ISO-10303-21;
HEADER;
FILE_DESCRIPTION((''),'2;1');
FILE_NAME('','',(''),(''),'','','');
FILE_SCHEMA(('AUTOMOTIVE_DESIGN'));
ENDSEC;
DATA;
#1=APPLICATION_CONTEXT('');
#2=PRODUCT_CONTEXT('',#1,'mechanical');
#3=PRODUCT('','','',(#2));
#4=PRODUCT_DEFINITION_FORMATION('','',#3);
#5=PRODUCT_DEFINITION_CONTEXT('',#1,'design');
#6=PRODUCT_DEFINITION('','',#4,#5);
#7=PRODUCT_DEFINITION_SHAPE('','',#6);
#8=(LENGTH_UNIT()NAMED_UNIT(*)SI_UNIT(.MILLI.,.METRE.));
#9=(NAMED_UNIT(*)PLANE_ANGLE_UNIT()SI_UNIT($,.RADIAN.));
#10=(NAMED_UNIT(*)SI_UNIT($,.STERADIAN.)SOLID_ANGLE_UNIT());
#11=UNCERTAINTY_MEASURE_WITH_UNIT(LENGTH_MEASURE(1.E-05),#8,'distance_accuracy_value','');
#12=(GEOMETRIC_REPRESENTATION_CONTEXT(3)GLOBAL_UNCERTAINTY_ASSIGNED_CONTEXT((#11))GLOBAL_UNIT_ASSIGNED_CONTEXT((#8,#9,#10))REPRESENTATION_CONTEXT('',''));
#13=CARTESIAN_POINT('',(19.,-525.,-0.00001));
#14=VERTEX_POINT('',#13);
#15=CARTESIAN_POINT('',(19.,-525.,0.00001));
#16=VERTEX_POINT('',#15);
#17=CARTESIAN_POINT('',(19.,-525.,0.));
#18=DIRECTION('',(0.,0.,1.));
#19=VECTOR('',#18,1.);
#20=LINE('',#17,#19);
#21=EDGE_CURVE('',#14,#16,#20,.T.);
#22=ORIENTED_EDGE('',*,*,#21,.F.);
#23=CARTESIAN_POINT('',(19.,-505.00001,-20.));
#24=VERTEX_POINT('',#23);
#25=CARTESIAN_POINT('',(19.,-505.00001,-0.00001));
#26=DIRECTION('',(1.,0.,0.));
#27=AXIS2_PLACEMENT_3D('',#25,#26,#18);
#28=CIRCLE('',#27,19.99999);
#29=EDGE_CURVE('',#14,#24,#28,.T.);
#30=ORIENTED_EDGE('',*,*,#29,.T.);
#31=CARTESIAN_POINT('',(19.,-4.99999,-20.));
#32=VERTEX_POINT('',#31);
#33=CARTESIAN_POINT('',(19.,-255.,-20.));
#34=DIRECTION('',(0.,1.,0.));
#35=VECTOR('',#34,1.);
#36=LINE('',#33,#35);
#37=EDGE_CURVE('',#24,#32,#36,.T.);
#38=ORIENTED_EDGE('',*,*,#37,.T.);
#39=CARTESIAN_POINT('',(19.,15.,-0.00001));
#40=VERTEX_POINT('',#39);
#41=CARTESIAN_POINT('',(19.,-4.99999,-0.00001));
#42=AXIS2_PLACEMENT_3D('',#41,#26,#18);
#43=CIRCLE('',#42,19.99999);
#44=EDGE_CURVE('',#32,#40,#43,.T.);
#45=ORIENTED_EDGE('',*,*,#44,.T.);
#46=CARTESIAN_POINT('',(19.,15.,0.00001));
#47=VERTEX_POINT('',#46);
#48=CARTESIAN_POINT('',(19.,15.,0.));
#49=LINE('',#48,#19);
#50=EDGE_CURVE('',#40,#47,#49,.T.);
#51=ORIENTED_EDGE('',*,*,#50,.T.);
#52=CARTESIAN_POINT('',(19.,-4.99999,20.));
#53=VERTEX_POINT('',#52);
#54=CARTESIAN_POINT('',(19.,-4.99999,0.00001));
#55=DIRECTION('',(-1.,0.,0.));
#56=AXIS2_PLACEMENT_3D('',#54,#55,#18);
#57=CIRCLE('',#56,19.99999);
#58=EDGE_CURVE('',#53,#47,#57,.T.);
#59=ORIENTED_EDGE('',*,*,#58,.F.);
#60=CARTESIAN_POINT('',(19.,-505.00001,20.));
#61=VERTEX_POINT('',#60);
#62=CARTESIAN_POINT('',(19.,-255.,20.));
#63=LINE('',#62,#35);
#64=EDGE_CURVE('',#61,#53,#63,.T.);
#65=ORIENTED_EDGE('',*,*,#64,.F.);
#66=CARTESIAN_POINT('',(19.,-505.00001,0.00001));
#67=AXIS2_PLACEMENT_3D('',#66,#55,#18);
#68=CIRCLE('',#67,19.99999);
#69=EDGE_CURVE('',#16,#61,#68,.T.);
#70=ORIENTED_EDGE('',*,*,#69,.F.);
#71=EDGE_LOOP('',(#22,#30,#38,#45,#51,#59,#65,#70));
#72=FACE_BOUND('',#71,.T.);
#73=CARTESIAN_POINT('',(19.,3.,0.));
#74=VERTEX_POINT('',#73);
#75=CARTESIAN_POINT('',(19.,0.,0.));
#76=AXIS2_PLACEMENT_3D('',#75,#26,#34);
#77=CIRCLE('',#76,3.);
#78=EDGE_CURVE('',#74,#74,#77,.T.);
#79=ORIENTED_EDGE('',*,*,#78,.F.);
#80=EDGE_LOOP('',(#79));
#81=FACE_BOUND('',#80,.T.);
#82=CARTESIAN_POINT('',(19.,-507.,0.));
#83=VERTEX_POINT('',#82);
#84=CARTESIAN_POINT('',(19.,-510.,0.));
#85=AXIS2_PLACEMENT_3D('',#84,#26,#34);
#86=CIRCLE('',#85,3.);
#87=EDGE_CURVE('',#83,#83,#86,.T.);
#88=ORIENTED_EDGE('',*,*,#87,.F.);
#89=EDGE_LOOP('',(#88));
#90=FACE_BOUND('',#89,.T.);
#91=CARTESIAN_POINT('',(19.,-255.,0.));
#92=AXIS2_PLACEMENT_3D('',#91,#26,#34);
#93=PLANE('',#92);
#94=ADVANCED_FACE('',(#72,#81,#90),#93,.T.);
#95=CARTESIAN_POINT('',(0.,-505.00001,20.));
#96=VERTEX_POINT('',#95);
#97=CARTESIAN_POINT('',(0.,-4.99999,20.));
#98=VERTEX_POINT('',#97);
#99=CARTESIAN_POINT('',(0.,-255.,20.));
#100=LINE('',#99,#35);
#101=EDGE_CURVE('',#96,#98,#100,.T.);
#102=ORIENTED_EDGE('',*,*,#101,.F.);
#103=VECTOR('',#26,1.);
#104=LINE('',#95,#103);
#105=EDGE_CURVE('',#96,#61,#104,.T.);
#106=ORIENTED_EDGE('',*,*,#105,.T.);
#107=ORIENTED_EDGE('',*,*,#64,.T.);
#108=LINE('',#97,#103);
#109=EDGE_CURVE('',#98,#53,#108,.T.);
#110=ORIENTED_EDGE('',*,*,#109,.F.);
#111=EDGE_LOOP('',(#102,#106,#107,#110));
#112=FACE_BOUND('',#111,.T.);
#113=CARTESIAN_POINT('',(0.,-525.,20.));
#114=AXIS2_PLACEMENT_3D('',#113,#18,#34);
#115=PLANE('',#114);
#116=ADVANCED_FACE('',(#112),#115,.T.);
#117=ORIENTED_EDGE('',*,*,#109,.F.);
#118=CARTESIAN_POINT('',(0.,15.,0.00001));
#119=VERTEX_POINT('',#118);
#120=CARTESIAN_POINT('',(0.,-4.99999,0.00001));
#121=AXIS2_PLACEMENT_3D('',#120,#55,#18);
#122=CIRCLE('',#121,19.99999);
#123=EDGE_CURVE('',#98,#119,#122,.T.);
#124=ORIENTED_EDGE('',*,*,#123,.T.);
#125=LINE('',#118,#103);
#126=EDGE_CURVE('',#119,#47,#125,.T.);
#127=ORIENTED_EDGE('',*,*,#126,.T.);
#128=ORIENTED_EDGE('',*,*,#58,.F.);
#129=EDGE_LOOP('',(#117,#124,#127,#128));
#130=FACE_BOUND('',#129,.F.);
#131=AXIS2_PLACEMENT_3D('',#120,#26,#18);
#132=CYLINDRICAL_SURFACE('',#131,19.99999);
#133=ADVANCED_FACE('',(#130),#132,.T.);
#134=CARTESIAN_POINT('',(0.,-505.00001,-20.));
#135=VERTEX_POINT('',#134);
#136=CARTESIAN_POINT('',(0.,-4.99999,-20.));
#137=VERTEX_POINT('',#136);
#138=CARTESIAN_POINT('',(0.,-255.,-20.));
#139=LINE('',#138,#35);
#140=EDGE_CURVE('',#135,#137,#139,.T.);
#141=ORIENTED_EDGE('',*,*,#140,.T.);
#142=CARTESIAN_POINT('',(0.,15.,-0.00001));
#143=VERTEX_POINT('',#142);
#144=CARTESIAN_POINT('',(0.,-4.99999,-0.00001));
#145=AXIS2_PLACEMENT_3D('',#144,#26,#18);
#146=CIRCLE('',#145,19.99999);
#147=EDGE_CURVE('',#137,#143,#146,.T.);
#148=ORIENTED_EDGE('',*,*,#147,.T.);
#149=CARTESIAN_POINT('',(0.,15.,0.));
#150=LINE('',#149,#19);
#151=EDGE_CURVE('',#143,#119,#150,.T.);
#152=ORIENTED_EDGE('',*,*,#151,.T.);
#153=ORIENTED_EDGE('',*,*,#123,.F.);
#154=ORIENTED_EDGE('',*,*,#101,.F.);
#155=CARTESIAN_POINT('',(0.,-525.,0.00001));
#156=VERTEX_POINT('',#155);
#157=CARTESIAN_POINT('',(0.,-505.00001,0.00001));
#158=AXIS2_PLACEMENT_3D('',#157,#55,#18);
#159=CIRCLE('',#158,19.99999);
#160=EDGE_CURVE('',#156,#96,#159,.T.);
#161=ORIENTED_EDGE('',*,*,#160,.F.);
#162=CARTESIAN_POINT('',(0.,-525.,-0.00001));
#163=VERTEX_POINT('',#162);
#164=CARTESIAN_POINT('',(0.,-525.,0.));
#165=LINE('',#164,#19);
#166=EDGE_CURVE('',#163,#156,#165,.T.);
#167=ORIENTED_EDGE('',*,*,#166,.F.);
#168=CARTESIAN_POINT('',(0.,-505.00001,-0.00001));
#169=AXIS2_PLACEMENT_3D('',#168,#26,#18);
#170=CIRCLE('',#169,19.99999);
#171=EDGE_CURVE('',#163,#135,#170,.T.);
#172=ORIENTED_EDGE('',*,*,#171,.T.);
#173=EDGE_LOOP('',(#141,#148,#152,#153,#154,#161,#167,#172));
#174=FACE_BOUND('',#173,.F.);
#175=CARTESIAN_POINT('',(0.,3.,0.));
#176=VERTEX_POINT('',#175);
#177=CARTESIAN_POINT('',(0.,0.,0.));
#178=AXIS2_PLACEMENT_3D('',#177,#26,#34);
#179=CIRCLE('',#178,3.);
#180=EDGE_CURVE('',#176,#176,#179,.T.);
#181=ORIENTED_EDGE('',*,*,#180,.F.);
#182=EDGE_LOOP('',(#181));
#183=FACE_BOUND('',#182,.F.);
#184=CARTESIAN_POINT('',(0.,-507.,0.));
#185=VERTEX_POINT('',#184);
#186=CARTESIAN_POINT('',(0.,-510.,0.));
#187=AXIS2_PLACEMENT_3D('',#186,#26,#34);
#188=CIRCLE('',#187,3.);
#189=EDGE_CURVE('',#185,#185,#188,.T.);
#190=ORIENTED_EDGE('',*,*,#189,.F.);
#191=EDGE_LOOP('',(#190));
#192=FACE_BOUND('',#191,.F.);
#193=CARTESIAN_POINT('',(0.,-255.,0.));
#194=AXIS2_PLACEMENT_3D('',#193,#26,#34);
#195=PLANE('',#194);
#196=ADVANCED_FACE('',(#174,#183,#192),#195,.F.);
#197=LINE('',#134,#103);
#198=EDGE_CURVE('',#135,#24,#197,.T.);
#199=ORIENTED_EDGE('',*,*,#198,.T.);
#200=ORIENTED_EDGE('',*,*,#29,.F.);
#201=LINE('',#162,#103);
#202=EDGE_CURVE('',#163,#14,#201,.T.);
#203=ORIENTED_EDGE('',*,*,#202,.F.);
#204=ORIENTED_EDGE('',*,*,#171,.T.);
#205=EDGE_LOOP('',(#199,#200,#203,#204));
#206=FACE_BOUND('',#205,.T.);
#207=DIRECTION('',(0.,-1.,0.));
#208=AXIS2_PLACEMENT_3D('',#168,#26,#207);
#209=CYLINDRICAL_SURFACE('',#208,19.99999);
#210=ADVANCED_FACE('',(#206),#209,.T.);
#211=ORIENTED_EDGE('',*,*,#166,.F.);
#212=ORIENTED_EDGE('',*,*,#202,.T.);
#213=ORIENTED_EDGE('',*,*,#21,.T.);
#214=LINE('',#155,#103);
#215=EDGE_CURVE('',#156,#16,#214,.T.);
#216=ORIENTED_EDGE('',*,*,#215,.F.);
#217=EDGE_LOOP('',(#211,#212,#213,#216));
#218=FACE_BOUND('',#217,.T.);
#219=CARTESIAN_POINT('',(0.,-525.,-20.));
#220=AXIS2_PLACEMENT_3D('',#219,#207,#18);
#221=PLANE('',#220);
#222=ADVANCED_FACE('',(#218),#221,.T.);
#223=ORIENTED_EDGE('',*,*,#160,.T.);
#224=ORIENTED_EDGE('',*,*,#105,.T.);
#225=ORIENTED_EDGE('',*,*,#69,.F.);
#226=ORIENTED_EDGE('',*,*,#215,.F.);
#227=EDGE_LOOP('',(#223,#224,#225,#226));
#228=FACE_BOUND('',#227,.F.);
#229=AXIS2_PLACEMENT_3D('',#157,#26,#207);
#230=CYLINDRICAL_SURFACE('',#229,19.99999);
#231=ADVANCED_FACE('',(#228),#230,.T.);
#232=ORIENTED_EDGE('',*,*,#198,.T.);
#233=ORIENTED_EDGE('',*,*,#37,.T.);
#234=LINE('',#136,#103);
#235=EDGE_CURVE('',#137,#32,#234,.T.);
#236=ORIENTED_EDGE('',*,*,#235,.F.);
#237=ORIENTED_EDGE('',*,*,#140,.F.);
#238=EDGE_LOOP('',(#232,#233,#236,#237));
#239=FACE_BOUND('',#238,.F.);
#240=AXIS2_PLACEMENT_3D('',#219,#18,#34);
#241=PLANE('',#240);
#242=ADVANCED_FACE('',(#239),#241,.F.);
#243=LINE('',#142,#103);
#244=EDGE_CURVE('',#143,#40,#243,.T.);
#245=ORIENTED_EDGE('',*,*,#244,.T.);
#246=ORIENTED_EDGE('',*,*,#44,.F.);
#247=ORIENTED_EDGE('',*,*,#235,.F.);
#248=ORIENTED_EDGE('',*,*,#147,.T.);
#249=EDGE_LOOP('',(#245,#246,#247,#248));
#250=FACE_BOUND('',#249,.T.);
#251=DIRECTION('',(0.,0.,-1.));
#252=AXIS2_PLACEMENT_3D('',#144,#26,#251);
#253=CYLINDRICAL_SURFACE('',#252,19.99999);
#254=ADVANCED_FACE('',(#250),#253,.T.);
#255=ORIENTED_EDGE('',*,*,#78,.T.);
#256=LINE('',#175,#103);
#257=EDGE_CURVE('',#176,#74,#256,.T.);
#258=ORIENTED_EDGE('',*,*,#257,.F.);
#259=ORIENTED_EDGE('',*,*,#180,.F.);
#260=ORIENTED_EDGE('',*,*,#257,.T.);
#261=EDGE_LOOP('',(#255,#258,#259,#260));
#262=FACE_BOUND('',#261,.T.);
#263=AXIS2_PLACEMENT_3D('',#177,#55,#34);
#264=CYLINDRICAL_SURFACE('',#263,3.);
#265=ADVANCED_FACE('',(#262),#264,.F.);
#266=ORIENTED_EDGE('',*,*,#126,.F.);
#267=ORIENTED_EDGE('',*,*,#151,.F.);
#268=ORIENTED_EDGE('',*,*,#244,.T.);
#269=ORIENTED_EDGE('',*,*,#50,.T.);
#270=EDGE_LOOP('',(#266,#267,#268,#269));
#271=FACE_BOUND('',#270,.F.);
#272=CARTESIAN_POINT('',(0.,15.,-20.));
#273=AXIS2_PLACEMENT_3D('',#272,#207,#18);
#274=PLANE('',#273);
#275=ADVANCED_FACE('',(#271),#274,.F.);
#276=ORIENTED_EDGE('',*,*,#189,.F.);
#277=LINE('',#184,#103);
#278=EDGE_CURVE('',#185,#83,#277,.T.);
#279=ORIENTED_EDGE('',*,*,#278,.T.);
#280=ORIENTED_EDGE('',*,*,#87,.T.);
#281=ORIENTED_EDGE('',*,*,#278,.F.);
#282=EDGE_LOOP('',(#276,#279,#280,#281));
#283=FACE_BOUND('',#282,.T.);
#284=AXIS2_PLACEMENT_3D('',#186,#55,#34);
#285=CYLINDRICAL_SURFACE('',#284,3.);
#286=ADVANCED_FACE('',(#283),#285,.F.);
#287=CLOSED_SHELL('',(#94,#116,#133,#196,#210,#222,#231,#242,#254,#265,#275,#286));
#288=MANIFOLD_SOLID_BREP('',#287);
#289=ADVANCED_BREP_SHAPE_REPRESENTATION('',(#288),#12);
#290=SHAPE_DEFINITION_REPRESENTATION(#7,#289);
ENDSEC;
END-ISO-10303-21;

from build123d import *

# Parameters (mm, degrees)
F0_W     = 540
F0_H     = 40
F0_R     = 3
F1_DEPTH = 19
F2_R     = 19.99999


# Not quite as in the source:
# - a fillet or chamfer is up to 0.001 mm smaller than in the source, because OpenCascade refuses the exact size


with BuildPart() as f1:
    # F0 (on Right) → F1 (new body)
    with BuildSketch(Plane.YZ):
        with Locations((-255, 0)):
            Rectangle(F0_W, F0_H)
        with Locations((-510, 0)):
            Circle(F0_R, mode=Mode.SUBTRACT)
        Circle(F0_R, mode=Mode.SUBTRACT)
    extrude(amount=F1_DEPTH)

    # F2 (radius 20 in the source; OpenCascade refuses exactly that, so slightly less here)
    f2_edges = [f1.edges().sort_by_distance(p)[0] for p in [
        (9.5, 15, 20),
        (9.5, 15, -20),
        (9.5, -525, 20),
        (9.5, -525, -20),
    ]]
    fillet(f2_edges, radius=F2_R)


solid = f1.part
